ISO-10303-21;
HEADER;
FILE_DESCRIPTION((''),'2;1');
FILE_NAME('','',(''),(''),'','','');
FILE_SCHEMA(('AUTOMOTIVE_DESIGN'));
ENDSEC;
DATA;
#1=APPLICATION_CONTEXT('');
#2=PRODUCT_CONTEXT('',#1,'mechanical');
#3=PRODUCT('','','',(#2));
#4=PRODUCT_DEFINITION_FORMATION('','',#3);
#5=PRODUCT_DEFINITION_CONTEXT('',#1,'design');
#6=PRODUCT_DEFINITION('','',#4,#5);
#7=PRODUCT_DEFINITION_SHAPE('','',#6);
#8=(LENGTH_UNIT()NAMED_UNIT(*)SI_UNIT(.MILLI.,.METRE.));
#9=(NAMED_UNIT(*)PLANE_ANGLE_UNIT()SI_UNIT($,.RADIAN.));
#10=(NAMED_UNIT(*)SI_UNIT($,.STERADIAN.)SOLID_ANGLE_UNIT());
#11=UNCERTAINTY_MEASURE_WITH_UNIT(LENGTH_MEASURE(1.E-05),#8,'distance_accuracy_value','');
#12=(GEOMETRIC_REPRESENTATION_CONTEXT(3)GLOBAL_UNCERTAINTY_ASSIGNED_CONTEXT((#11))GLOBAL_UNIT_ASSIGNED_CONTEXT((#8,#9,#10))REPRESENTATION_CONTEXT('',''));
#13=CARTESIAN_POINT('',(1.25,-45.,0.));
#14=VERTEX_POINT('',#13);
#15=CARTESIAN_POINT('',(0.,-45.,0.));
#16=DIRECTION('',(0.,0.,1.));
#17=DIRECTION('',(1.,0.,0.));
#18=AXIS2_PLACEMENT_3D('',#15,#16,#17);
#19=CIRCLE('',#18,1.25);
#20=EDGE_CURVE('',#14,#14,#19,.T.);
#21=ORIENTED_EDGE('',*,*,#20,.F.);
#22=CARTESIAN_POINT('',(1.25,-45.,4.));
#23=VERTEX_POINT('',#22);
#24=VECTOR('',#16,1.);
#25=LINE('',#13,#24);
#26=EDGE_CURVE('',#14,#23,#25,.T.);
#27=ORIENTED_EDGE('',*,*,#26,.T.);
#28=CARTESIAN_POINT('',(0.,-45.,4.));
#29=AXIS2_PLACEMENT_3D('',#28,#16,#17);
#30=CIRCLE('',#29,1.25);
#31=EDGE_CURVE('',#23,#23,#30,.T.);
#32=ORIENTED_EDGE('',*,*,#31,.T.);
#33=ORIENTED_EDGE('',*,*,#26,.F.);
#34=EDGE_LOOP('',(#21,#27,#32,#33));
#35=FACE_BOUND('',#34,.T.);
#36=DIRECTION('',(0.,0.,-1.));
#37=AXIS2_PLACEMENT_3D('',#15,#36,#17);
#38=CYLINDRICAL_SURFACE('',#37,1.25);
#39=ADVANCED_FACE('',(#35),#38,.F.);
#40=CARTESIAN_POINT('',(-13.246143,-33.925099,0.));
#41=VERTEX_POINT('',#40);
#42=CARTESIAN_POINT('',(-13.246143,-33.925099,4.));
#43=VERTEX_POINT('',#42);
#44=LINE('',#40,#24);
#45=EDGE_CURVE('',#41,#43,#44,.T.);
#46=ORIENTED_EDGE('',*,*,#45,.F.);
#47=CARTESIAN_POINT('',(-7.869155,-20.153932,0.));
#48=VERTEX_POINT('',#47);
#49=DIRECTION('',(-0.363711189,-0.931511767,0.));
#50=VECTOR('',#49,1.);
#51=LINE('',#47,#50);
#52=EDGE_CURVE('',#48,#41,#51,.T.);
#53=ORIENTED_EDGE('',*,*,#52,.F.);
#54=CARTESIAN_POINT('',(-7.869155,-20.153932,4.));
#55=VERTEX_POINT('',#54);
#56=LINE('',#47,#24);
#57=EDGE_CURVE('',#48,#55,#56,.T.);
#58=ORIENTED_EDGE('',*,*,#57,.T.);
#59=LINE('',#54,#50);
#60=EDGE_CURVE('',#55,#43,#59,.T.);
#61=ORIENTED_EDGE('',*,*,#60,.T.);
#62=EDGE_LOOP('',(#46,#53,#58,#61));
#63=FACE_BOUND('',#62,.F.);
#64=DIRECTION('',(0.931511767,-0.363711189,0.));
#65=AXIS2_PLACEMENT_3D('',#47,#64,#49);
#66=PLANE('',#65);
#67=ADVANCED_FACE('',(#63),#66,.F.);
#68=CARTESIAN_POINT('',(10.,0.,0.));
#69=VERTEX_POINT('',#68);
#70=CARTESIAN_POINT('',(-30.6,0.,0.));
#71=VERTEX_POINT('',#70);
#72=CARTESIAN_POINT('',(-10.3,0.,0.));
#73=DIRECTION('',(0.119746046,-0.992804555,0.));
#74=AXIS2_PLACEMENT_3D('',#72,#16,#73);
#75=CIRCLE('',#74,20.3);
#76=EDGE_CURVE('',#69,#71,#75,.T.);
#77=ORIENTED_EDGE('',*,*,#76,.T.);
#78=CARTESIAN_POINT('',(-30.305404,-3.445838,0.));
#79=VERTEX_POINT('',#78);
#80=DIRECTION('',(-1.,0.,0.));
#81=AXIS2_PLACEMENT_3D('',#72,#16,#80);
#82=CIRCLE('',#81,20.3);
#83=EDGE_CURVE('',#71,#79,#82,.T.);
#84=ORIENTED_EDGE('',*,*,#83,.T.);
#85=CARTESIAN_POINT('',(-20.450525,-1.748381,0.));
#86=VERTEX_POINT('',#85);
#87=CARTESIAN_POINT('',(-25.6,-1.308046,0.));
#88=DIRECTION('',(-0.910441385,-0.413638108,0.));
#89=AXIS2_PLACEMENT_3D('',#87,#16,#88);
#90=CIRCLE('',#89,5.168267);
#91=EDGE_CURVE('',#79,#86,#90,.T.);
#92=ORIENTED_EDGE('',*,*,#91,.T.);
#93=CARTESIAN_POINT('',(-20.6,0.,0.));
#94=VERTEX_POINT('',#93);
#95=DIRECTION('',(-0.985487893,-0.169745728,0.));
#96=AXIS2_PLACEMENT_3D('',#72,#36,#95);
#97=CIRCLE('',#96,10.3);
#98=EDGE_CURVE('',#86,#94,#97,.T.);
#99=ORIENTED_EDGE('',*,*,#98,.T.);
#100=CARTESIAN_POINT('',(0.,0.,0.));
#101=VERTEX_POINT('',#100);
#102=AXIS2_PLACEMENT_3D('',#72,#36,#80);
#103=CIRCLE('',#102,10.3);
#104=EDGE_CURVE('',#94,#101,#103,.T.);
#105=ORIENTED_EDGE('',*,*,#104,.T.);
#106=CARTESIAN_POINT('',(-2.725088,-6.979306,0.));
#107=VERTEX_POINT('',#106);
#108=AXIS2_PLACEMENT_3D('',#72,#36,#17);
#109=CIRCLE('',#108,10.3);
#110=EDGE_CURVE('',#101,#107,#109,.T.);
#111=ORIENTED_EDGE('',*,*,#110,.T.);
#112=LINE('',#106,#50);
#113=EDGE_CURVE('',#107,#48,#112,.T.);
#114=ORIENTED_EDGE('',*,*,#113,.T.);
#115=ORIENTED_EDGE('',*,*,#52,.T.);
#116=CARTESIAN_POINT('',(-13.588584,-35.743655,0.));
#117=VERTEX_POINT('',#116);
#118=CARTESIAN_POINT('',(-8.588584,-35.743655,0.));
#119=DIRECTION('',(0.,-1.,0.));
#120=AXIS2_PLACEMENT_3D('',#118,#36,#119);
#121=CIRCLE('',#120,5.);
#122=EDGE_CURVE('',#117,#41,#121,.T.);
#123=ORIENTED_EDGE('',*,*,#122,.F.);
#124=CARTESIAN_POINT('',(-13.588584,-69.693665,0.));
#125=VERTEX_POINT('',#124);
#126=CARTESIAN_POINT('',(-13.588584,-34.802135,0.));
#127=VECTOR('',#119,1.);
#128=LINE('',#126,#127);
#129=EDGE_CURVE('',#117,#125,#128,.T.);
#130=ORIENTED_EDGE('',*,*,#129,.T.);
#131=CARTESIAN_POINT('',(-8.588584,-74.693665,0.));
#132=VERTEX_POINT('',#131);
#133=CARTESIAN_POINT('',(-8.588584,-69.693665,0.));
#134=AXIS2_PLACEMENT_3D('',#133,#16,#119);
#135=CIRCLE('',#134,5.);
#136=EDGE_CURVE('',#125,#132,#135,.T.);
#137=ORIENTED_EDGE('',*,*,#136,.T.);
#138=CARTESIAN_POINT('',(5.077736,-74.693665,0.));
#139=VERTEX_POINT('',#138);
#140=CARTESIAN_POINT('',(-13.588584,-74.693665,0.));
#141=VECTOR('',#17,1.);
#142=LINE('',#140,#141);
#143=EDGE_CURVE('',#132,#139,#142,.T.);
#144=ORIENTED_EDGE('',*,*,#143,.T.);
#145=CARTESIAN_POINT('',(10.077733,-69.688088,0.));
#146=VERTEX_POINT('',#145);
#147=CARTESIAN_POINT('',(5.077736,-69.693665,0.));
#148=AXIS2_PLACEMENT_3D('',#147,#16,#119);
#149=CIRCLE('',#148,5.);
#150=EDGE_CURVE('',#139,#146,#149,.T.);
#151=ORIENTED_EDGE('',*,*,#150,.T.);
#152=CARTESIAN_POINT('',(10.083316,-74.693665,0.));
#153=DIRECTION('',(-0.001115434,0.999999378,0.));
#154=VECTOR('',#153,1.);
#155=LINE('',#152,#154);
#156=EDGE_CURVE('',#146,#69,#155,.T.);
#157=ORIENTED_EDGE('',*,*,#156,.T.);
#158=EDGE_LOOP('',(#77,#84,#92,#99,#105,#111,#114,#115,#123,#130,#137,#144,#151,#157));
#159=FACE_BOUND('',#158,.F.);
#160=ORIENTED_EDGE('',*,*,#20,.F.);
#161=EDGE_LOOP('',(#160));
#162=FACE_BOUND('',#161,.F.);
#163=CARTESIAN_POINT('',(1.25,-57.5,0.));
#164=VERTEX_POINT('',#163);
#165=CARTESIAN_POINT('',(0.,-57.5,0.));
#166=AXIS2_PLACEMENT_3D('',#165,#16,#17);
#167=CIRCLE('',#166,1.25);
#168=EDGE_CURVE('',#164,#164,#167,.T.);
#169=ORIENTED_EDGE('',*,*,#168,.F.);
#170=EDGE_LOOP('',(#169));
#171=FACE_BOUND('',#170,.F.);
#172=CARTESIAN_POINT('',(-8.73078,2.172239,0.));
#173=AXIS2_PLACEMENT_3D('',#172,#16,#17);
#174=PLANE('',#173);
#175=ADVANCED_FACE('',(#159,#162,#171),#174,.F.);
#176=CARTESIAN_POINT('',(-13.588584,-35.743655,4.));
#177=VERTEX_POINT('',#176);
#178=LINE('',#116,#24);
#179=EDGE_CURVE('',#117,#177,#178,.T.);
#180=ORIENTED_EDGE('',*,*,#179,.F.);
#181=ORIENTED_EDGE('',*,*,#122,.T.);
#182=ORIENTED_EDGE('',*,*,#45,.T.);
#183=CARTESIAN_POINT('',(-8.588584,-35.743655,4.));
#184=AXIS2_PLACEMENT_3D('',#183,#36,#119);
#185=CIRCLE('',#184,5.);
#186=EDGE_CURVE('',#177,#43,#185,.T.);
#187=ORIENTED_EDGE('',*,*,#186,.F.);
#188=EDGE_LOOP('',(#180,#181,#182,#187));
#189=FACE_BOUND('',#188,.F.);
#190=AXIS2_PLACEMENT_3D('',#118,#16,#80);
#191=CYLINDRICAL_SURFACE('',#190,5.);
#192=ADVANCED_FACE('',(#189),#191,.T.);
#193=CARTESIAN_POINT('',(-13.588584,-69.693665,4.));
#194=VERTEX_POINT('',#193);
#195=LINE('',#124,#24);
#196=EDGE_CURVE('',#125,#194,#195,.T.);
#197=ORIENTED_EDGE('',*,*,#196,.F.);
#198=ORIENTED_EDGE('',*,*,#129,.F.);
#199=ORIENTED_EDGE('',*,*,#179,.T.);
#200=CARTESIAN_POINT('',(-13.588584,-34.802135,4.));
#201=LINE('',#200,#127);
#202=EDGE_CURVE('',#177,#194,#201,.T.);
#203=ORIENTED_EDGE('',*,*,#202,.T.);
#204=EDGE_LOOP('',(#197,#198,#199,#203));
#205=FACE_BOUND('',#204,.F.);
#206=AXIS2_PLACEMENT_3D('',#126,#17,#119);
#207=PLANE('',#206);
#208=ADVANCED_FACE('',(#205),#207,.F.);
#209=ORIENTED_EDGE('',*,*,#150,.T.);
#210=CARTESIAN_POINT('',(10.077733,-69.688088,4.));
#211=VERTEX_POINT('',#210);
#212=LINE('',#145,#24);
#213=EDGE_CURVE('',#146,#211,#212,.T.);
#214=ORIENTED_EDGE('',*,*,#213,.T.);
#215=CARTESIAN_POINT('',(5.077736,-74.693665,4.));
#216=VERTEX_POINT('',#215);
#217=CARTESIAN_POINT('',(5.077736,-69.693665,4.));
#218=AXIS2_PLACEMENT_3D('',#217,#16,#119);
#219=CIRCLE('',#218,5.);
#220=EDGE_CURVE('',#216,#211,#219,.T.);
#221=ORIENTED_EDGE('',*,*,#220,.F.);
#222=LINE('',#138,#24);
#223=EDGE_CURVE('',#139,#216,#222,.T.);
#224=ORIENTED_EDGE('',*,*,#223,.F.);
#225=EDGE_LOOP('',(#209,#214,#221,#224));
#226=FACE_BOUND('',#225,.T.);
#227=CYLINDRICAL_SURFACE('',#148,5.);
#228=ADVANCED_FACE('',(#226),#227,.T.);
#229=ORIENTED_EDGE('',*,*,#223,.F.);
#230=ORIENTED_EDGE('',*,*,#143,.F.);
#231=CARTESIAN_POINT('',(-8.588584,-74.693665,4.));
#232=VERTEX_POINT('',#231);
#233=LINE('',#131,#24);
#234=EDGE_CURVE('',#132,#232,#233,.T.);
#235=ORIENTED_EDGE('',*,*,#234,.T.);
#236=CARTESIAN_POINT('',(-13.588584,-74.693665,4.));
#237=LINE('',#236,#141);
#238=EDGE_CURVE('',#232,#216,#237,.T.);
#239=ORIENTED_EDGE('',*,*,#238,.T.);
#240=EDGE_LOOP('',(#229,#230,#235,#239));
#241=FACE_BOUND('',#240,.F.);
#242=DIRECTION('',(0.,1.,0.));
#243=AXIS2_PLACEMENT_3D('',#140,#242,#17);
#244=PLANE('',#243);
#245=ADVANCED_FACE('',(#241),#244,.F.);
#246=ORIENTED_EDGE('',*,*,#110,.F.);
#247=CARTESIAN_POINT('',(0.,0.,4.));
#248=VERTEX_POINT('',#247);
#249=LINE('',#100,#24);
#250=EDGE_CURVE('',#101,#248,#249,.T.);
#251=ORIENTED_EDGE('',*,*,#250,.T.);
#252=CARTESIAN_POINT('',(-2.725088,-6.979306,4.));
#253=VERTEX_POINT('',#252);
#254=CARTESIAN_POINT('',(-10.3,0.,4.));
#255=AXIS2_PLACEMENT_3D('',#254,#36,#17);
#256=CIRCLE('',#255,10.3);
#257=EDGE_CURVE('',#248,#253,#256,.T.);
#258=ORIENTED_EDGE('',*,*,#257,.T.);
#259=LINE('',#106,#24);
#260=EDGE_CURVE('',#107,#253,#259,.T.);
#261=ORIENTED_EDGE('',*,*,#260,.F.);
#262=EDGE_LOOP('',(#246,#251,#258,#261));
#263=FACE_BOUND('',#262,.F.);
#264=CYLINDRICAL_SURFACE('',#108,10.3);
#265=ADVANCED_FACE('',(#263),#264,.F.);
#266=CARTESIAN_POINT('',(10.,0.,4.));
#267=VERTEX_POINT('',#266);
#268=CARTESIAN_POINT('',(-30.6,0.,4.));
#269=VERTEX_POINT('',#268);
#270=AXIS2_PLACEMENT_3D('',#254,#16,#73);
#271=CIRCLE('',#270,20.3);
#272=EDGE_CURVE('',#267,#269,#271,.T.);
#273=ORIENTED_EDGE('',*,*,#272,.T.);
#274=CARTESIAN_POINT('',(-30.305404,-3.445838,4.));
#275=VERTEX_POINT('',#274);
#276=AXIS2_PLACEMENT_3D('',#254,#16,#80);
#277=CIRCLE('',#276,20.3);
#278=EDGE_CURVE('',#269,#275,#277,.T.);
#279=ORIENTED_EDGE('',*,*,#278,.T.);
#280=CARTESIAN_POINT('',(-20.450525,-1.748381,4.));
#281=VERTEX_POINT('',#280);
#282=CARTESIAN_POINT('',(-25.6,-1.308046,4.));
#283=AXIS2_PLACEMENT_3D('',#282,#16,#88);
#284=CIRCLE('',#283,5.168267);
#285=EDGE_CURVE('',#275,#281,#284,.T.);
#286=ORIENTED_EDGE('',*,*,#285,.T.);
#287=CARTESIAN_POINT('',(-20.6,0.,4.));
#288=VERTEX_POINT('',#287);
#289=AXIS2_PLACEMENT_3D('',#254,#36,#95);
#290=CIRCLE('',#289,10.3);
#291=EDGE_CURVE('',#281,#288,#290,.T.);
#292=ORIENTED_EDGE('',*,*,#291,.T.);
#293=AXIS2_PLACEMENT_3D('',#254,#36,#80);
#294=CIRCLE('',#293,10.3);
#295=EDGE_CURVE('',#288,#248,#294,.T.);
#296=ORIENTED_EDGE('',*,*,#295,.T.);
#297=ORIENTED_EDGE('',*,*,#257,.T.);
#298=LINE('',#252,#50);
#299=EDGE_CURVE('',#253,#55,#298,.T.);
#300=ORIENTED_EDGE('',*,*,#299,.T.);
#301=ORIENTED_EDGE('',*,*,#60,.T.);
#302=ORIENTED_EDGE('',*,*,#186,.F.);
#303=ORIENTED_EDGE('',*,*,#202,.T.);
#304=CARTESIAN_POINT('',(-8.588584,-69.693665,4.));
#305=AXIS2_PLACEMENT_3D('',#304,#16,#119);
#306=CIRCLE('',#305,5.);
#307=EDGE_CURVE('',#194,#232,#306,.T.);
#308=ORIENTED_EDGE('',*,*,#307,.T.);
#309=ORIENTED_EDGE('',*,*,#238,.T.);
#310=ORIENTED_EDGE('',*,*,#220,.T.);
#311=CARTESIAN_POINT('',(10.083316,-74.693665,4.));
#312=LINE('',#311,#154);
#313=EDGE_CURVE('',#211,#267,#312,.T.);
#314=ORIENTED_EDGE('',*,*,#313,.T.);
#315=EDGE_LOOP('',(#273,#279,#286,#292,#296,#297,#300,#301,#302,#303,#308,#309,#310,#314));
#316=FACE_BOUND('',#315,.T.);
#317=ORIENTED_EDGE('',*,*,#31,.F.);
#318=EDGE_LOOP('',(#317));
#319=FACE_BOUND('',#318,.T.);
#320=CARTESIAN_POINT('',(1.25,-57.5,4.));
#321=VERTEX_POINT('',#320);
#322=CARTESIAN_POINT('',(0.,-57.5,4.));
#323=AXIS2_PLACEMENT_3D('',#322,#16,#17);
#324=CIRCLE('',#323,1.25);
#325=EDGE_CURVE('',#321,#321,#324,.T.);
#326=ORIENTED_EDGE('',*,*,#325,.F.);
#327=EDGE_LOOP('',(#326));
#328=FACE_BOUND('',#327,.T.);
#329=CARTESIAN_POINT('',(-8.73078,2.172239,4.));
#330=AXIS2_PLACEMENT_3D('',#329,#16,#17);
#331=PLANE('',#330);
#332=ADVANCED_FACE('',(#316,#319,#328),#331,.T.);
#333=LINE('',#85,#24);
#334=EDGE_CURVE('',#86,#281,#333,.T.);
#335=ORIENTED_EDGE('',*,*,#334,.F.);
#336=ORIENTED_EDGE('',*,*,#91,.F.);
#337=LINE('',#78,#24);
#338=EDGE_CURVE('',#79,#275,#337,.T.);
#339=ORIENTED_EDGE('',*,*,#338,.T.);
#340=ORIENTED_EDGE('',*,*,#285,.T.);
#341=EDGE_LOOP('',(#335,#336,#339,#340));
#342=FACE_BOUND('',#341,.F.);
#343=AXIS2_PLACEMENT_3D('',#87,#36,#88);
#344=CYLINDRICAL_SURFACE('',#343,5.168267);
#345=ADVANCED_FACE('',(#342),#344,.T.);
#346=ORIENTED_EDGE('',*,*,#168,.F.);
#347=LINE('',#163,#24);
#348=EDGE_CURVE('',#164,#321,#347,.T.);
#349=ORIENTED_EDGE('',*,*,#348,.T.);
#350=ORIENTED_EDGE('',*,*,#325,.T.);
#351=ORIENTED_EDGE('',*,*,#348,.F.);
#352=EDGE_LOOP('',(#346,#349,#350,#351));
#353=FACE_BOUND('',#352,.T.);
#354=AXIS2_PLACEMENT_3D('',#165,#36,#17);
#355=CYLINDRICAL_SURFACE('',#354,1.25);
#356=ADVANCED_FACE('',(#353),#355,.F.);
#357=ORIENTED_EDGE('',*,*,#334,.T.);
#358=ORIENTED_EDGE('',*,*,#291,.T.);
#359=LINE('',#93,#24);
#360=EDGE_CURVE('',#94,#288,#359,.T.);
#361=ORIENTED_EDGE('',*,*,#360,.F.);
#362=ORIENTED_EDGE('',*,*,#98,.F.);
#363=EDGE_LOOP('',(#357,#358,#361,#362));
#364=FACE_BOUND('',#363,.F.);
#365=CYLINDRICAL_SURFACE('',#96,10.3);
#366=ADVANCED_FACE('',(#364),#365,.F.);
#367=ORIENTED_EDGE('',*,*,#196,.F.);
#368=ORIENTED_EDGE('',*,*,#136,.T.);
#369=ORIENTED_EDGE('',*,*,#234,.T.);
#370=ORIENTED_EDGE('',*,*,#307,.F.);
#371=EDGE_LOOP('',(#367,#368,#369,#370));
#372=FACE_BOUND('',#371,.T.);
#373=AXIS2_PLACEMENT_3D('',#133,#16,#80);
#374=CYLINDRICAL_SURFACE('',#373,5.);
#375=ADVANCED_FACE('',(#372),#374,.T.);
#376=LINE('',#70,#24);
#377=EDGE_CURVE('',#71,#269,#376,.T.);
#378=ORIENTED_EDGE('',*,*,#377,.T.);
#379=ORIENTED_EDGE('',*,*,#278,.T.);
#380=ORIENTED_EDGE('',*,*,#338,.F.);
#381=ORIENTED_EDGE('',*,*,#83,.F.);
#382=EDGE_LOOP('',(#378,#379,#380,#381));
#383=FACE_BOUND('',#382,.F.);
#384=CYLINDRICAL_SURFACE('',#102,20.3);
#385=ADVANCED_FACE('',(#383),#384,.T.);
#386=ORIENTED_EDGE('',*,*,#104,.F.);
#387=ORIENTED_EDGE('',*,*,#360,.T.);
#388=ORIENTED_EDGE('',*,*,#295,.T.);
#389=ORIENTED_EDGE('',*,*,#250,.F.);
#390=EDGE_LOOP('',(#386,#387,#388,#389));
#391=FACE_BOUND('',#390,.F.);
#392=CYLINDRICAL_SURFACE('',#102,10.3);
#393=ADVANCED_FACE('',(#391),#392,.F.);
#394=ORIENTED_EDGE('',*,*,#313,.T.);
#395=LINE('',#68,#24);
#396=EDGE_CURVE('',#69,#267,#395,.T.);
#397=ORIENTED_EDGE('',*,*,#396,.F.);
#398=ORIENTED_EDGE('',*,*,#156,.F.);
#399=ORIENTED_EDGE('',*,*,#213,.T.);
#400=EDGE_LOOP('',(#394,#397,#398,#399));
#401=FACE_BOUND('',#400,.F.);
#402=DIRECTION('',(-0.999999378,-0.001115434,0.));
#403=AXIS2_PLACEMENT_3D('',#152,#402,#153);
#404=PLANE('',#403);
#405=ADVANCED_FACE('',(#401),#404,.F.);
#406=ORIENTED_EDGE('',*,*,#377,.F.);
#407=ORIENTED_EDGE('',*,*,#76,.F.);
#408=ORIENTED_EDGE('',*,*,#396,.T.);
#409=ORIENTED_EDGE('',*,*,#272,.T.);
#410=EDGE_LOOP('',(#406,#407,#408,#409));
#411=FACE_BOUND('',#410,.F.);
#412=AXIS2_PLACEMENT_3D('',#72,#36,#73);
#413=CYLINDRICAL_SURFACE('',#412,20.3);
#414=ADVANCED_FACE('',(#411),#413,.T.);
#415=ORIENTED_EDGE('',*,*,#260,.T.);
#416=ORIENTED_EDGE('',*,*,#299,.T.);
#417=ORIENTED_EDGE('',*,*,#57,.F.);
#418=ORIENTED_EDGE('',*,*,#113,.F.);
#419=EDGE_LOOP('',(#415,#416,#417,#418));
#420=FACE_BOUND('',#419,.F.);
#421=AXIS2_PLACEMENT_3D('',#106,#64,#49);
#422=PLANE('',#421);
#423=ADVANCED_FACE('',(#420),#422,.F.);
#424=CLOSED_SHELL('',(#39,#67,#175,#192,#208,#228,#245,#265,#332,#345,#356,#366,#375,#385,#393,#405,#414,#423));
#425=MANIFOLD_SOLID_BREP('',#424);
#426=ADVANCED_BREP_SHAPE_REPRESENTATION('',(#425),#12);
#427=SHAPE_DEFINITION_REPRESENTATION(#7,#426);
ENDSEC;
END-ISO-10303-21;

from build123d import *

# Parameters (mm, degrees)
F0_R     = 1.25
F1_DEPTH = 4
F2_R     = 5
F3_R     = 5
F4_R     = 5


# Not quite as in the source:
# - ends of sketch curves that miss each other by under 0.0002 mm in the source are joined


with BuildPart() as f1:
    # F0 (on Top) → F1 (new body)
    with BuildSketch(Plane.XY):
        with BuildLine():
            ThreePointArc((-20.6, 0), (-10.3, 10.3), (0, 0))
            ThreePointArc((0, 0), (-0.7054288039, -3.746225242), (-2.7250880706, -6.9793057865))
            Line((-2.7250880706, -6.9793057865), (-7.8691552748, -20.1539324679))
            ThreePointArc((-7.8691552748, -20.1539324679), (4.8894066362, -13.467439476), (10, 0))
            ThreePointArc((10, 0), (-10.3, 20.3), (-30.6, 0))
            ThreePointArc((-30.6, 0), (-25.6, 3.8602209978), (-20.6, 0))
        make_face()
        with BuildLine():
            ThreePointArc((-20.4505253001, -1.748381003), (-20.5625632907, -0.8773794529), (-20.6, 0))
            ThreePointArc((-20.6, 0), (-25.6, 3.8602209978), (-30.6, 0))
            ThreePointArc((-30.6, 0), (-30.526216971, -1.7292041645), (-30.3054042323, -3.4458382874))
            ThreePointArc((-30.3054042323, -3.4458382874), (-24.722708741, -6.4013107037), (-20.4505253001, -1.748381003))
        make_face()
        with BuildLine():
            ThreePointArc((10, 0), (4.8894066362, -13.467439476), (-7.8691552748, -20.1539324679))
            Line((-7.8691552748, -20.1539324679), (-13.5885840282, -34.8021350801))
            Line((-13.5885840282, -34.8021350801), (-13.5885840282, -74.6936649084))
            Line((-13.5885840282, -74.6936649084), (10.083315894, -74.6936649084))
            Line((10.083315894, -74.6936649084), (10, 0))
        make_face()
        with Locations((0, -57.5)):
            Circle(F0_R, mode=Mode.SUBTRACT)
        with Locations((0, -45)):
            Circle(F0_R, mode=Mode.SUBTRACT)
    extrude(amount=F1_DEPTH)

    # F2
    f2_edges = [f1.edges().sort_by_distance(p)[0] for p in [
        (-13.588584, -74.693665, 2),
    ]]
    fillet(f2_edges, radius=F2_R)

    # F3
    f3_edges = [f1.edges().sort_by_distance(p)[0] for p in [
        (10.083316, -74.693665, 2),
    ]]
    fillet(f3_edges, radius=F3_R)

    # F4
    f4_edges = [f1.edges().sort_by_distance(p)[0] for p in [
        (-13.588584, -34.802135, 2),
    ]]
    fillet(f4_edges, radius=F4_R)


solid = f1.part
